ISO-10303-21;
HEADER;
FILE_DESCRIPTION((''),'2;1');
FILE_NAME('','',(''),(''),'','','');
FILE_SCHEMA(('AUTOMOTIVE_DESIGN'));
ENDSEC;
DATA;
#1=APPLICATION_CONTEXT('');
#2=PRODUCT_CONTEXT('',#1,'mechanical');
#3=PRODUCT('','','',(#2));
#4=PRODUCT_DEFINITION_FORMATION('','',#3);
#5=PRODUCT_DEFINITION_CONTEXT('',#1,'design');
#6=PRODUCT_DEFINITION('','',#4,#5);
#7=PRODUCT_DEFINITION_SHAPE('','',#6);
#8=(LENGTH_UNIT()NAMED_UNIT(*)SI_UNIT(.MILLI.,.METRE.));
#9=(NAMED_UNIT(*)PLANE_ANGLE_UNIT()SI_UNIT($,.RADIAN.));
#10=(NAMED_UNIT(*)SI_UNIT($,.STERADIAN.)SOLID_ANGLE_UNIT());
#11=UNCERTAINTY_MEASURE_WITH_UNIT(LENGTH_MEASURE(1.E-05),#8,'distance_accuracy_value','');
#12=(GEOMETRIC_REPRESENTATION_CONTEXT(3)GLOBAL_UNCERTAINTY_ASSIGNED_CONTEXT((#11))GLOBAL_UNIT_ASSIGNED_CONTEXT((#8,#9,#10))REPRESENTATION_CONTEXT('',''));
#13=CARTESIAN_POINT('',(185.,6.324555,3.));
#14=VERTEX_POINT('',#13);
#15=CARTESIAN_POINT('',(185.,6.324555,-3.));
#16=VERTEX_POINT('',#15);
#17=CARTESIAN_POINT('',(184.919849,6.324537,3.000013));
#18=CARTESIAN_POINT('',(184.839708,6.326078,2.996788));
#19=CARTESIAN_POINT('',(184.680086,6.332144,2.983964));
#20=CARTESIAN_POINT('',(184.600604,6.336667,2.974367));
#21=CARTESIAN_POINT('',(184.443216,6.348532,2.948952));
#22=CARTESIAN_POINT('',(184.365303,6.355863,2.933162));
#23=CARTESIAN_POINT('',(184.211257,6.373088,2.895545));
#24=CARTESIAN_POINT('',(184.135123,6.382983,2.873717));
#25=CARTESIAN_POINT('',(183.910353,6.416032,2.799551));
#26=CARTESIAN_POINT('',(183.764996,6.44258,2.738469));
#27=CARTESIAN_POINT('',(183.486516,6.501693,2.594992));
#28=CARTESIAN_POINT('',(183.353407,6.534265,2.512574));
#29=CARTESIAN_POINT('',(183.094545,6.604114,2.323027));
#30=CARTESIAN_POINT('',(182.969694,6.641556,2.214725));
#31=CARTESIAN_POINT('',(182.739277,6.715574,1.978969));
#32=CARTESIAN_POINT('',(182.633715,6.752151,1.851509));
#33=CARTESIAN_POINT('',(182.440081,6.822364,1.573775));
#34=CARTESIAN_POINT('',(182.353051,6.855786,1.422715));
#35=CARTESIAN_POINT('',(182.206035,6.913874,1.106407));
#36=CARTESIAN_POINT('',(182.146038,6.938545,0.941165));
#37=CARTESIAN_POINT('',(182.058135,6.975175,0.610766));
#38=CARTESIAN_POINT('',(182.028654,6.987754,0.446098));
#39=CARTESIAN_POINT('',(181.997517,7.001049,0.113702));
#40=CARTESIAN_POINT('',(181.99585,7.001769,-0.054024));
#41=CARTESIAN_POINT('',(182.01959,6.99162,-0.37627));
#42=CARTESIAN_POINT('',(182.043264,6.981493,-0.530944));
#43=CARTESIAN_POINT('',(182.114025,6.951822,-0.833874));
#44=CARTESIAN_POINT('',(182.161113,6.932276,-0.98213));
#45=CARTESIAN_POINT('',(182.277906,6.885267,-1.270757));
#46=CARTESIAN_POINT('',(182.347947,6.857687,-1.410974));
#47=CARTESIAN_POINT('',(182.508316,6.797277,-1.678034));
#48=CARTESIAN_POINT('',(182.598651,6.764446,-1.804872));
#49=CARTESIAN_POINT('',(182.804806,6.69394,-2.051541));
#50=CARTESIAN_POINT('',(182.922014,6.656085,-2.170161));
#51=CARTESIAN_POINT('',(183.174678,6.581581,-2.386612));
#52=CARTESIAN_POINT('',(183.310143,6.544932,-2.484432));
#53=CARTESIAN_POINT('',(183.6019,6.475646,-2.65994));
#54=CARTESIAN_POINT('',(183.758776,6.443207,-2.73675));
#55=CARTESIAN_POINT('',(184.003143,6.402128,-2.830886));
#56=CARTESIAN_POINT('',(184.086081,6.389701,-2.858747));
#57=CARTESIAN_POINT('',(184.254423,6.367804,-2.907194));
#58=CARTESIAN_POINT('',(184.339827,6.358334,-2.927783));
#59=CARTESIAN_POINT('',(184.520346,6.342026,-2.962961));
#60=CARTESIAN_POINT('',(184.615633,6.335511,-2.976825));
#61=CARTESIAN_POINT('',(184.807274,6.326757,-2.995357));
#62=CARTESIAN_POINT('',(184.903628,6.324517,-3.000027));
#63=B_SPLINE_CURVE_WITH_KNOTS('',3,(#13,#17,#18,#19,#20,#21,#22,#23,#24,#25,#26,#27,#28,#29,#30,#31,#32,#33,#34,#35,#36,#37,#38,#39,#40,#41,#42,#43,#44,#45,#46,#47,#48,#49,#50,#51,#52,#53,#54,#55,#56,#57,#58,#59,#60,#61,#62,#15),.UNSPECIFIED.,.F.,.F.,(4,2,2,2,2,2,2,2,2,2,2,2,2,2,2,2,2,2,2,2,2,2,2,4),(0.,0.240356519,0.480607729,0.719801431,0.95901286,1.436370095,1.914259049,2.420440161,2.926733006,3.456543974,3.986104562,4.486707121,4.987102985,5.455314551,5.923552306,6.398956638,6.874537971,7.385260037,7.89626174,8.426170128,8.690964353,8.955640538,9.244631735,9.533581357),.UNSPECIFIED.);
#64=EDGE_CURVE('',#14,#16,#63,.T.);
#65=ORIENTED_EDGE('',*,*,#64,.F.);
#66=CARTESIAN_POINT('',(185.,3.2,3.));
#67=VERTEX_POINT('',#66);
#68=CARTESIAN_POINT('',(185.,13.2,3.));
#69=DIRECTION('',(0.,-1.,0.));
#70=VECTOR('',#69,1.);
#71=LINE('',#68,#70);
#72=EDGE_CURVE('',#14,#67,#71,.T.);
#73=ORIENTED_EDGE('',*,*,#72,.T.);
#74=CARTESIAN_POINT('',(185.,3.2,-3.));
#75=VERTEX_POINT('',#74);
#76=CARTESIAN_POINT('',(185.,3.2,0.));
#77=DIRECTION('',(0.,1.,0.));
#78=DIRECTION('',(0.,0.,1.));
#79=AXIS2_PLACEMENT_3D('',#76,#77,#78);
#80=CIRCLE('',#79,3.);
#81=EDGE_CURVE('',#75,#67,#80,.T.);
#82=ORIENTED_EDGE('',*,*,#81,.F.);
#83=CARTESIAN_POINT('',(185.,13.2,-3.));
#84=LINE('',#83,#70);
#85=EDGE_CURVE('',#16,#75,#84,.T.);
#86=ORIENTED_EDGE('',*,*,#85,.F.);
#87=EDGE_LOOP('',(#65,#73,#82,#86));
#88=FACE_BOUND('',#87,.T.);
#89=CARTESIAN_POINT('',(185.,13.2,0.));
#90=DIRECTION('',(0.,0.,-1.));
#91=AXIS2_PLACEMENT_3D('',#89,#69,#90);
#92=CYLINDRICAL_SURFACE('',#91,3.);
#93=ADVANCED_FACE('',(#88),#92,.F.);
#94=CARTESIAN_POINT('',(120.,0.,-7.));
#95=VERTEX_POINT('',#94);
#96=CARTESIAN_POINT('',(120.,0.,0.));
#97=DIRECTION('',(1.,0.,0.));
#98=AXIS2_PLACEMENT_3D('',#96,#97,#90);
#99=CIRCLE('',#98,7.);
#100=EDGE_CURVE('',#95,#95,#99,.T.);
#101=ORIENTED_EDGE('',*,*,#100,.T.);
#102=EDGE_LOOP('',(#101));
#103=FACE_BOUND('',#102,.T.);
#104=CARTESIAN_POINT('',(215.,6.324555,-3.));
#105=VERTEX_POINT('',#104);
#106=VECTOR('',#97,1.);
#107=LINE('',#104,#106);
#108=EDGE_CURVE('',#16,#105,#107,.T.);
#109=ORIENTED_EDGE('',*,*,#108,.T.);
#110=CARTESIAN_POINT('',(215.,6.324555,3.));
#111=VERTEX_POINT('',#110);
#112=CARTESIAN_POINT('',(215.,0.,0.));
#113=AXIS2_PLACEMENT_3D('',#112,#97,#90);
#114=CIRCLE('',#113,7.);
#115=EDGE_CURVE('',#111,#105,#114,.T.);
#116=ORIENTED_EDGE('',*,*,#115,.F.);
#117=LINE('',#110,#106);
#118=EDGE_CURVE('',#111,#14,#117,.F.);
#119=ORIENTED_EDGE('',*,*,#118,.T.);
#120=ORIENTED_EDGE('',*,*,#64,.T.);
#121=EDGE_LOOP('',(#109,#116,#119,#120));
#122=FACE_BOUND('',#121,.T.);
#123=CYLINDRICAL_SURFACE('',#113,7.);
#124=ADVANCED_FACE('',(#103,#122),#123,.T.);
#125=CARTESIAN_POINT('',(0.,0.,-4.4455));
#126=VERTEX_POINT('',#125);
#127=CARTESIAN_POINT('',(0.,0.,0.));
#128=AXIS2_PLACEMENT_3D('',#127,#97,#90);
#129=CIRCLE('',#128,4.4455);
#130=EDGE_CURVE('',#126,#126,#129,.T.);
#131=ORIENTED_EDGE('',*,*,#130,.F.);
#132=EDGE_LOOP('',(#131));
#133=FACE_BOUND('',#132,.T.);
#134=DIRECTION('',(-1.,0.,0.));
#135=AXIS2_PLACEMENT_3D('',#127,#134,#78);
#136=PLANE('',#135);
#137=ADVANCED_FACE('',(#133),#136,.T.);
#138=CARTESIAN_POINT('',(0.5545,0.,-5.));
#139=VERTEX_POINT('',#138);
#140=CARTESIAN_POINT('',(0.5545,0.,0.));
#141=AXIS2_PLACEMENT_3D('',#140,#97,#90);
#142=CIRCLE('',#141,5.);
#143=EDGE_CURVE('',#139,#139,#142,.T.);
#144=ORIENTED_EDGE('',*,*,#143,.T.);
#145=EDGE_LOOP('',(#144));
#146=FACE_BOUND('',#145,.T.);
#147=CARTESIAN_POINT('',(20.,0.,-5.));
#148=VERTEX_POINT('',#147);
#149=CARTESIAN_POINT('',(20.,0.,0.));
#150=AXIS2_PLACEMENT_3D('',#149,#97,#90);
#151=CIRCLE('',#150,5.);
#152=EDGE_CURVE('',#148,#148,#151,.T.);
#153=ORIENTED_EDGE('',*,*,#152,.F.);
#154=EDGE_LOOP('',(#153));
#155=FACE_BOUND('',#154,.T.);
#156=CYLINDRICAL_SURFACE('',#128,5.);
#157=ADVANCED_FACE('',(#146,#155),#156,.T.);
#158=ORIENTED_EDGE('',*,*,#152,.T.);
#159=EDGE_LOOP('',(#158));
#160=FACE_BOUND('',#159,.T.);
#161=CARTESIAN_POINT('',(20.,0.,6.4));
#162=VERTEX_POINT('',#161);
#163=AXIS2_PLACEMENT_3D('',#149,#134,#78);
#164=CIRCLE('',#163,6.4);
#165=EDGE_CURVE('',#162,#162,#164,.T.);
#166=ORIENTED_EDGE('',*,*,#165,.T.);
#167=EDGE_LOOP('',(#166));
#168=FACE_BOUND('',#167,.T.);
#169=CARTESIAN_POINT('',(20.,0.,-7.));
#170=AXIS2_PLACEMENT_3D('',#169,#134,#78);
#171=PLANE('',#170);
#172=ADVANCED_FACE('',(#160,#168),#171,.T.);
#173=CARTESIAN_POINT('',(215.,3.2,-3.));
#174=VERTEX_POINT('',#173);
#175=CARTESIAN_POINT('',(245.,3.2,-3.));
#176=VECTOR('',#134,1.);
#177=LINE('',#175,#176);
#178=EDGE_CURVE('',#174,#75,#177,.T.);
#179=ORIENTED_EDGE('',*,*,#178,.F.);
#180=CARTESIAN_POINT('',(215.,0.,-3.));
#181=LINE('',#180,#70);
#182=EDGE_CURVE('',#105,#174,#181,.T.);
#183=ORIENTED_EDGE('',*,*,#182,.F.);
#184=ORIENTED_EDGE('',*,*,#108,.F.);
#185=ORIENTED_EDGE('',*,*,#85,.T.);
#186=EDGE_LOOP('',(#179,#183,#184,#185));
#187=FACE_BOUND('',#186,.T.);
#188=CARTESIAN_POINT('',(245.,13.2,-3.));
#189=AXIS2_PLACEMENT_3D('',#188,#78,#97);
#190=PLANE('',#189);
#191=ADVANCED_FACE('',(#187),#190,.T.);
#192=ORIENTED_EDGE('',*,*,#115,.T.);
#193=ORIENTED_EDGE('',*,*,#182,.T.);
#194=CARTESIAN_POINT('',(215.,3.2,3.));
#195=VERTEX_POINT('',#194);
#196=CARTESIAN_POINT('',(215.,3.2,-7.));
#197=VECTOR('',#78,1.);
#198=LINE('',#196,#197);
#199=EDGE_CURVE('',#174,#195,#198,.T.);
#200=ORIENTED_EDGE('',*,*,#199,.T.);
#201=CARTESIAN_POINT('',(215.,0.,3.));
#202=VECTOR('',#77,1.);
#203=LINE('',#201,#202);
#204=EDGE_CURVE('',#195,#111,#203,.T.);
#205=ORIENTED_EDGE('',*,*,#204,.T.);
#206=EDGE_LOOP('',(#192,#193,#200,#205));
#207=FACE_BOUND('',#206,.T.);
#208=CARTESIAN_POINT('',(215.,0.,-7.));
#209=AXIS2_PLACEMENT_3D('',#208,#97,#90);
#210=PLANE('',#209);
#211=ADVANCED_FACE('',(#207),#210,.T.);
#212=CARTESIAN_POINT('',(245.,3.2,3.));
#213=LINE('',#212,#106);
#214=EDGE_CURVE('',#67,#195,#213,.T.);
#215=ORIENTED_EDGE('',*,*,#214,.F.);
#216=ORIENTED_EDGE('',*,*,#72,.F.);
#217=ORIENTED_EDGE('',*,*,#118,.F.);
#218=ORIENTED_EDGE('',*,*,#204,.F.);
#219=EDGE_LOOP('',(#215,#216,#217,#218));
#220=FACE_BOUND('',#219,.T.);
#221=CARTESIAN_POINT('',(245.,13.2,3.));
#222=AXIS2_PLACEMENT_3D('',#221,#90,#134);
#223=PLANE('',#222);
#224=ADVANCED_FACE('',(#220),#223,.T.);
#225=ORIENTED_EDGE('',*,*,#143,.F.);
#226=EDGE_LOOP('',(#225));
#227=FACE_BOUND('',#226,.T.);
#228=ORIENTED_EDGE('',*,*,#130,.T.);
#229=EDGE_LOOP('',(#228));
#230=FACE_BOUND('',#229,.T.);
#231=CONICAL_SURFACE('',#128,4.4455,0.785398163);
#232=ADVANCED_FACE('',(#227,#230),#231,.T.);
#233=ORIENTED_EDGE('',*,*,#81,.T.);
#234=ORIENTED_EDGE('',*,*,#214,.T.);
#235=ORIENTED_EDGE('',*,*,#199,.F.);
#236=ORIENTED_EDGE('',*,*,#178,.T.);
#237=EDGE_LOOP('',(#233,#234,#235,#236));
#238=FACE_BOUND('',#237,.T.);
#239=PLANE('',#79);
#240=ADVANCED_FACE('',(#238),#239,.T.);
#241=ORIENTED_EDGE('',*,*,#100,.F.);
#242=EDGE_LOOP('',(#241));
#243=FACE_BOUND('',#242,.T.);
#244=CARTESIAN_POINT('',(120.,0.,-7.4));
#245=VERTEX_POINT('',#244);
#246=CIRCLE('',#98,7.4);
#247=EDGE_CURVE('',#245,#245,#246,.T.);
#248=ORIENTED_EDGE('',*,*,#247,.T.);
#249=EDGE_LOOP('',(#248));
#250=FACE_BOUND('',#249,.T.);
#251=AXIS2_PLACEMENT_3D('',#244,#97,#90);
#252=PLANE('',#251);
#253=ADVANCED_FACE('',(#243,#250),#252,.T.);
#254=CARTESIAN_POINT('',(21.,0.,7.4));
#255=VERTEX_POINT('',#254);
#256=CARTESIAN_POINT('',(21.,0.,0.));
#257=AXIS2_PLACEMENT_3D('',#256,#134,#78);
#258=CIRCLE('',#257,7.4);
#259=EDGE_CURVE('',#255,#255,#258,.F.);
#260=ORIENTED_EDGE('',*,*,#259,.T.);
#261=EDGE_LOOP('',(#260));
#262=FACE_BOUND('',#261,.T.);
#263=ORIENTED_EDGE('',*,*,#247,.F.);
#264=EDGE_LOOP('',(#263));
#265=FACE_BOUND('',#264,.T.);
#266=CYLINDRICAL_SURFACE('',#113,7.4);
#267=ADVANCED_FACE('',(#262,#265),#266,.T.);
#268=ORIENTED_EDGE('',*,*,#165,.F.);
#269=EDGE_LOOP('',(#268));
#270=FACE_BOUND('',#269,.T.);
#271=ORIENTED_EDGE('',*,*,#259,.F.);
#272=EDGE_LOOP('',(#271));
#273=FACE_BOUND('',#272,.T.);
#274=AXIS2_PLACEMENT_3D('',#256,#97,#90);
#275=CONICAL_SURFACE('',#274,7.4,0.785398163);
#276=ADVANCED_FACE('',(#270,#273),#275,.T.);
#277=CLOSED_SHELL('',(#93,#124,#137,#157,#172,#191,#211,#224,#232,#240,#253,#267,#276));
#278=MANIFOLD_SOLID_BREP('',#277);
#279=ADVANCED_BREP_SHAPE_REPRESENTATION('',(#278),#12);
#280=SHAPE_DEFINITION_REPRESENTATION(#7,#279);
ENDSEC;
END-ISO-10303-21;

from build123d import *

# Parameters (mm, degrees)
CHAMFER1_SIZE      = 1
CUT_EXTRUDE1_START = 3.2
CUT_EXTRUDE1_DEPTH = 10


# Read off the part's stored shape, not the designer's step: M10x1.0 Machine Threads Stud1
with BuildPart() as part:
    # Sketch1 → Revolve1 (revolve)
    with BuildSketch(Plane(origin=(0, 0, 0), x_dir=(1, 0, 0), z_dir=(0, 1, 0))):
        Polygon((0, 0), (0, 7), (20, 7), (20, 7.4), (120, 7.4), (120, 7), (215, 7), (215, 0), align=None)
    revolve(axis=Axis((215, 0, 0), (-1, 0, 0)))

    # M10x1.0 Machine Threads Stud1 outline → M10x1.0 Machine Threads Stud1 (revolve, cut)
    with BuildSketch(Plane.YX):
        Polygon((7, 20), (5, 20), (5, 0.5545), (4.4455, 0), (7, 0), align=None)
    revolve(axis=Axis((0, 0, 0), (1, 0, 0)), mode=Mode.SUBTRACT)

    # Chamfer1
    chamfer1_edges = [part.edges().sort_by_distance(p)[0] for p in [
        (20, 0, 7.4),
    ]]
    chamfer(chamfer1_edges, length=CHAMFER1_SIZE)

    # Sketch3 → Cut-Extrude1 (cut)
    with BuildSketch(Plane(origin=(0, 0, 0), x_dir=(1, 0, 0), z_dir=(0, 1, 0)).offset(CUT_EXTRUDE1_START)):
        with BuildLine():
            Line((245, -3), (185, -3))
            ThreePointArc((185, -3), (182, 0), (185, 3))
            Line((185, 3), (245, 3))
            Line((245, 3), (245, -3))
        make_face()
    extrude(amount=CUT_EXTRUDE1_DEPTH, mode=Mode.SUBTRACT)


solid = part.part
